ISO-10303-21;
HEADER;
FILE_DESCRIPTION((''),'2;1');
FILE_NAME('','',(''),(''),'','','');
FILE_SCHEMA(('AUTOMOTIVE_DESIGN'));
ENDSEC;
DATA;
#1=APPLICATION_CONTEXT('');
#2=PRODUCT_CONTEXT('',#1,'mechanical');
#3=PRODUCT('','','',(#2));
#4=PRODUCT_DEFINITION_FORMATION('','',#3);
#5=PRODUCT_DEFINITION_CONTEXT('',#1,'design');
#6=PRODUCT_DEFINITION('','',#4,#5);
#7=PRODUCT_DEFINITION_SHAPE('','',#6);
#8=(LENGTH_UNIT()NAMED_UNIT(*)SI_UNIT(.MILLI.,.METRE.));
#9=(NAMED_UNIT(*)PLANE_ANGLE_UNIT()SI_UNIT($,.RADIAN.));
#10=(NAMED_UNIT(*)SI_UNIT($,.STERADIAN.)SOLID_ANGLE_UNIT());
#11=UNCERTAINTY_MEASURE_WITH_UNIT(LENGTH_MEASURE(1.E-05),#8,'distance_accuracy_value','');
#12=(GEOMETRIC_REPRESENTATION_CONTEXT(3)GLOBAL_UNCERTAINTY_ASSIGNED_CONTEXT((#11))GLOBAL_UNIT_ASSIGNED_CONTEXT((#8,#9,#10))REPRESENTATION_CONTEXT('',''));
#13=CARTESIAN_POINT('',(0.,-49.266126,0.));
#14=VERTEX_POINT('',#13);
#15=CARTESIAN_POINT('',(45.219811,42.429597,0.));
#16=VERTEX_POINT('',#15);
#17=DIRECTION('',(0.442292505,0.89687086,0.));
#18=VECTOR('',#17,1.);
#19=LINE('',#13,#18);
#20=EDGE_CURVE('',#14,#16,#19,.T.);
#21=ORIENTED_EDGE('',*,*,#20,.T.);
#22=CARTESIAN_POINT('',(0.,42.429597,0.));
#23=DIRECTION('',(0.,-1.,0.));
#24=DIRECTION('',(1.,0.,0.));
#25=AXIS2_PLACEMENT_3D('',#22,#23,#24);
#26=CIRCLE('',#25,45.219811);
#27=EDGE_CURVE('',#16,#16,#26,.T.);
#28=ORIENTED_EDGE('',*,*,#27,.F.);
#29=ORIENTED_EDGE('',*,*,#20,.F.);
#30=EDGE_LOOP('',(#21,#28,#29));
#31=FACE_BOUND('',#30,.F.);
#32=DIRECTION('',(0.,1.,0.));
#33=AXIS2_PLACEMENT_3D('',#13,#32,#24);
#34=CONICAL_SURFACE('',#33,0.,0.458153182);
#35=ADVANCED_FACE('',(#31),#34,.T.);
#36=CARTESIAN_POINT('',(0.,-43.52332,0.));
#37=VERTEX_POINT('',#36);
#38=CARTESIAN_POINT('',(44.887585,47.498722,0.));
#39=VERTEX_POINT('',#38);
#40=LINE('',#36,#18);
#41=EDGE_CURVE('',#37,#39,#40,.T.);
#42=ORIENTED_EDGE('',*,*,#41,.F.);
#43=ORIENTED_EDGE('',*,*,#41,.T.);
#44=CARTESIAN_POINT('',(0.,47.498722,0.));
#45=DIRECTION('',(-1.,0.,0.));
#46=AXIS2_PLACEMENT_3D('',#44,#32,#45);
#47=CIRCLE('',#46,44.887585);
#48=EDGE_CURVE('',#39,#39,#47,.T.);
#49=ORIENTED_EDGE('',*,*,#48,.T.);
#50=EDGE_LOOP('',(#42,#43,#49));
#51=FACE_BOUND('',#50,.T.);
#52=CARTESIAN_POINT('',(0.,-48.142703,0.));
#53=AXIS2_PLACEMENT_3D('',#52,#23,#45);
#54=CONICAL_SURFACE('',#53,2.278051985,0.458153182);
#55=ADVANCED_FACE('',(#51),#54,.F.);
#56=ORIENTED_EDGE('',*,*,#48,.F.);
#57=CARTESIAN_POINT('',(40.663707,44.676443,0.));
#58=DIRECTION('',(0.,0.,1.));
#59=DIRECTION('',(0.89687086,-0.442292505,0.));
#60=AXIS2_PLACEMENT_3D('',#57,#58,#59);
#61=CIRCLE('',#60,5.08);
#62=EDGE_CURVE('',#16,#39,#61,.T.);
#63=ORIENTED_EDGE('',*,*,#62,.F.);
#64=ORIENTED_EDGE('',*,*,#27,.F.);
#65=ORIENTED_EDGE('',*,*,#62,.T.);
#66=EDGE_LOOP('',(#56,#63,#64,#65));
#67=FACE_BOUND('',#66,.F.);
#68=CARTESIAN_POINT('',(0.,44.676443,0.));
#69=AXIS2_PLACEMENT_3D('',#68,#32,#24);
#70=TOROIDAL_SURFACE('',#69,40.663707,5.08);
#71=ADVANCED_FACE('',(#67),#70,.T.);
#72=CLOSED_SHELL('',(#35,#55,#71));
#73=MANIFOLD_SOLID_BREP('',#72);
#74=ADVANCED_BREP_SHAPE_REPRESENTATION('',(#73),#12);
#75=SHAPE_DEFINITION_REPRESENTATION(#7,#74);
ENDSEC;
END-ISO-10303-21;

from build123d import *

# Parameters (mm, degrees)
F2_T = -2.54


# Not quite as in the source:
# - a fillet or chamfer that OpenCascade refuses, or shapes differently, is made with other operations: its cross-section is extruded or revolved along the edge and cut away or added


with BuildPart() as f1:
    # F0 (on Top) → F1 (revolve)
    with BuildSketch(Plane.XY):
        Polygon((0, 47.4987216294), (0, 44.8476299644), (0, -49.2661260068), (47.7196536958, 47.4987216294), align=None)
    revolve(axis=Axis((0, -2.2092480212, 0), (0, -1, 0)))

    # F2
    f2_openings = [f1.faces().sort_by_distance(p)[0] for p in [
        (0, 47.498722, 0),
    ]]
    offset(amount=F2_T, openings=f2_openings)

    # F3: fillet of radius 5.08 on 1 edges, made by hand

    # F3_s1 → F3_t2 (revolve, cut)
    with BuildSketch(Plane.XY):
        with BuildLine():
            ThreePointArc((45.2198112097, 42.4295968862), (45.7328319828, 45.0086691469), (44.8875848746, 47.4987216294))
            Line((44.8875848746, 47.4987216294), (47.7196536958, 47.4987216294))
            Line((47.7196536958, 47.4987216294), (45.2198112097, 42.4295968862))
        make_face()
    revolve(axis=Axis((0, 47.4987216294, 0), (0, -1, 0)), mode=Mode.SUBTRACT)


solid = f1.part
